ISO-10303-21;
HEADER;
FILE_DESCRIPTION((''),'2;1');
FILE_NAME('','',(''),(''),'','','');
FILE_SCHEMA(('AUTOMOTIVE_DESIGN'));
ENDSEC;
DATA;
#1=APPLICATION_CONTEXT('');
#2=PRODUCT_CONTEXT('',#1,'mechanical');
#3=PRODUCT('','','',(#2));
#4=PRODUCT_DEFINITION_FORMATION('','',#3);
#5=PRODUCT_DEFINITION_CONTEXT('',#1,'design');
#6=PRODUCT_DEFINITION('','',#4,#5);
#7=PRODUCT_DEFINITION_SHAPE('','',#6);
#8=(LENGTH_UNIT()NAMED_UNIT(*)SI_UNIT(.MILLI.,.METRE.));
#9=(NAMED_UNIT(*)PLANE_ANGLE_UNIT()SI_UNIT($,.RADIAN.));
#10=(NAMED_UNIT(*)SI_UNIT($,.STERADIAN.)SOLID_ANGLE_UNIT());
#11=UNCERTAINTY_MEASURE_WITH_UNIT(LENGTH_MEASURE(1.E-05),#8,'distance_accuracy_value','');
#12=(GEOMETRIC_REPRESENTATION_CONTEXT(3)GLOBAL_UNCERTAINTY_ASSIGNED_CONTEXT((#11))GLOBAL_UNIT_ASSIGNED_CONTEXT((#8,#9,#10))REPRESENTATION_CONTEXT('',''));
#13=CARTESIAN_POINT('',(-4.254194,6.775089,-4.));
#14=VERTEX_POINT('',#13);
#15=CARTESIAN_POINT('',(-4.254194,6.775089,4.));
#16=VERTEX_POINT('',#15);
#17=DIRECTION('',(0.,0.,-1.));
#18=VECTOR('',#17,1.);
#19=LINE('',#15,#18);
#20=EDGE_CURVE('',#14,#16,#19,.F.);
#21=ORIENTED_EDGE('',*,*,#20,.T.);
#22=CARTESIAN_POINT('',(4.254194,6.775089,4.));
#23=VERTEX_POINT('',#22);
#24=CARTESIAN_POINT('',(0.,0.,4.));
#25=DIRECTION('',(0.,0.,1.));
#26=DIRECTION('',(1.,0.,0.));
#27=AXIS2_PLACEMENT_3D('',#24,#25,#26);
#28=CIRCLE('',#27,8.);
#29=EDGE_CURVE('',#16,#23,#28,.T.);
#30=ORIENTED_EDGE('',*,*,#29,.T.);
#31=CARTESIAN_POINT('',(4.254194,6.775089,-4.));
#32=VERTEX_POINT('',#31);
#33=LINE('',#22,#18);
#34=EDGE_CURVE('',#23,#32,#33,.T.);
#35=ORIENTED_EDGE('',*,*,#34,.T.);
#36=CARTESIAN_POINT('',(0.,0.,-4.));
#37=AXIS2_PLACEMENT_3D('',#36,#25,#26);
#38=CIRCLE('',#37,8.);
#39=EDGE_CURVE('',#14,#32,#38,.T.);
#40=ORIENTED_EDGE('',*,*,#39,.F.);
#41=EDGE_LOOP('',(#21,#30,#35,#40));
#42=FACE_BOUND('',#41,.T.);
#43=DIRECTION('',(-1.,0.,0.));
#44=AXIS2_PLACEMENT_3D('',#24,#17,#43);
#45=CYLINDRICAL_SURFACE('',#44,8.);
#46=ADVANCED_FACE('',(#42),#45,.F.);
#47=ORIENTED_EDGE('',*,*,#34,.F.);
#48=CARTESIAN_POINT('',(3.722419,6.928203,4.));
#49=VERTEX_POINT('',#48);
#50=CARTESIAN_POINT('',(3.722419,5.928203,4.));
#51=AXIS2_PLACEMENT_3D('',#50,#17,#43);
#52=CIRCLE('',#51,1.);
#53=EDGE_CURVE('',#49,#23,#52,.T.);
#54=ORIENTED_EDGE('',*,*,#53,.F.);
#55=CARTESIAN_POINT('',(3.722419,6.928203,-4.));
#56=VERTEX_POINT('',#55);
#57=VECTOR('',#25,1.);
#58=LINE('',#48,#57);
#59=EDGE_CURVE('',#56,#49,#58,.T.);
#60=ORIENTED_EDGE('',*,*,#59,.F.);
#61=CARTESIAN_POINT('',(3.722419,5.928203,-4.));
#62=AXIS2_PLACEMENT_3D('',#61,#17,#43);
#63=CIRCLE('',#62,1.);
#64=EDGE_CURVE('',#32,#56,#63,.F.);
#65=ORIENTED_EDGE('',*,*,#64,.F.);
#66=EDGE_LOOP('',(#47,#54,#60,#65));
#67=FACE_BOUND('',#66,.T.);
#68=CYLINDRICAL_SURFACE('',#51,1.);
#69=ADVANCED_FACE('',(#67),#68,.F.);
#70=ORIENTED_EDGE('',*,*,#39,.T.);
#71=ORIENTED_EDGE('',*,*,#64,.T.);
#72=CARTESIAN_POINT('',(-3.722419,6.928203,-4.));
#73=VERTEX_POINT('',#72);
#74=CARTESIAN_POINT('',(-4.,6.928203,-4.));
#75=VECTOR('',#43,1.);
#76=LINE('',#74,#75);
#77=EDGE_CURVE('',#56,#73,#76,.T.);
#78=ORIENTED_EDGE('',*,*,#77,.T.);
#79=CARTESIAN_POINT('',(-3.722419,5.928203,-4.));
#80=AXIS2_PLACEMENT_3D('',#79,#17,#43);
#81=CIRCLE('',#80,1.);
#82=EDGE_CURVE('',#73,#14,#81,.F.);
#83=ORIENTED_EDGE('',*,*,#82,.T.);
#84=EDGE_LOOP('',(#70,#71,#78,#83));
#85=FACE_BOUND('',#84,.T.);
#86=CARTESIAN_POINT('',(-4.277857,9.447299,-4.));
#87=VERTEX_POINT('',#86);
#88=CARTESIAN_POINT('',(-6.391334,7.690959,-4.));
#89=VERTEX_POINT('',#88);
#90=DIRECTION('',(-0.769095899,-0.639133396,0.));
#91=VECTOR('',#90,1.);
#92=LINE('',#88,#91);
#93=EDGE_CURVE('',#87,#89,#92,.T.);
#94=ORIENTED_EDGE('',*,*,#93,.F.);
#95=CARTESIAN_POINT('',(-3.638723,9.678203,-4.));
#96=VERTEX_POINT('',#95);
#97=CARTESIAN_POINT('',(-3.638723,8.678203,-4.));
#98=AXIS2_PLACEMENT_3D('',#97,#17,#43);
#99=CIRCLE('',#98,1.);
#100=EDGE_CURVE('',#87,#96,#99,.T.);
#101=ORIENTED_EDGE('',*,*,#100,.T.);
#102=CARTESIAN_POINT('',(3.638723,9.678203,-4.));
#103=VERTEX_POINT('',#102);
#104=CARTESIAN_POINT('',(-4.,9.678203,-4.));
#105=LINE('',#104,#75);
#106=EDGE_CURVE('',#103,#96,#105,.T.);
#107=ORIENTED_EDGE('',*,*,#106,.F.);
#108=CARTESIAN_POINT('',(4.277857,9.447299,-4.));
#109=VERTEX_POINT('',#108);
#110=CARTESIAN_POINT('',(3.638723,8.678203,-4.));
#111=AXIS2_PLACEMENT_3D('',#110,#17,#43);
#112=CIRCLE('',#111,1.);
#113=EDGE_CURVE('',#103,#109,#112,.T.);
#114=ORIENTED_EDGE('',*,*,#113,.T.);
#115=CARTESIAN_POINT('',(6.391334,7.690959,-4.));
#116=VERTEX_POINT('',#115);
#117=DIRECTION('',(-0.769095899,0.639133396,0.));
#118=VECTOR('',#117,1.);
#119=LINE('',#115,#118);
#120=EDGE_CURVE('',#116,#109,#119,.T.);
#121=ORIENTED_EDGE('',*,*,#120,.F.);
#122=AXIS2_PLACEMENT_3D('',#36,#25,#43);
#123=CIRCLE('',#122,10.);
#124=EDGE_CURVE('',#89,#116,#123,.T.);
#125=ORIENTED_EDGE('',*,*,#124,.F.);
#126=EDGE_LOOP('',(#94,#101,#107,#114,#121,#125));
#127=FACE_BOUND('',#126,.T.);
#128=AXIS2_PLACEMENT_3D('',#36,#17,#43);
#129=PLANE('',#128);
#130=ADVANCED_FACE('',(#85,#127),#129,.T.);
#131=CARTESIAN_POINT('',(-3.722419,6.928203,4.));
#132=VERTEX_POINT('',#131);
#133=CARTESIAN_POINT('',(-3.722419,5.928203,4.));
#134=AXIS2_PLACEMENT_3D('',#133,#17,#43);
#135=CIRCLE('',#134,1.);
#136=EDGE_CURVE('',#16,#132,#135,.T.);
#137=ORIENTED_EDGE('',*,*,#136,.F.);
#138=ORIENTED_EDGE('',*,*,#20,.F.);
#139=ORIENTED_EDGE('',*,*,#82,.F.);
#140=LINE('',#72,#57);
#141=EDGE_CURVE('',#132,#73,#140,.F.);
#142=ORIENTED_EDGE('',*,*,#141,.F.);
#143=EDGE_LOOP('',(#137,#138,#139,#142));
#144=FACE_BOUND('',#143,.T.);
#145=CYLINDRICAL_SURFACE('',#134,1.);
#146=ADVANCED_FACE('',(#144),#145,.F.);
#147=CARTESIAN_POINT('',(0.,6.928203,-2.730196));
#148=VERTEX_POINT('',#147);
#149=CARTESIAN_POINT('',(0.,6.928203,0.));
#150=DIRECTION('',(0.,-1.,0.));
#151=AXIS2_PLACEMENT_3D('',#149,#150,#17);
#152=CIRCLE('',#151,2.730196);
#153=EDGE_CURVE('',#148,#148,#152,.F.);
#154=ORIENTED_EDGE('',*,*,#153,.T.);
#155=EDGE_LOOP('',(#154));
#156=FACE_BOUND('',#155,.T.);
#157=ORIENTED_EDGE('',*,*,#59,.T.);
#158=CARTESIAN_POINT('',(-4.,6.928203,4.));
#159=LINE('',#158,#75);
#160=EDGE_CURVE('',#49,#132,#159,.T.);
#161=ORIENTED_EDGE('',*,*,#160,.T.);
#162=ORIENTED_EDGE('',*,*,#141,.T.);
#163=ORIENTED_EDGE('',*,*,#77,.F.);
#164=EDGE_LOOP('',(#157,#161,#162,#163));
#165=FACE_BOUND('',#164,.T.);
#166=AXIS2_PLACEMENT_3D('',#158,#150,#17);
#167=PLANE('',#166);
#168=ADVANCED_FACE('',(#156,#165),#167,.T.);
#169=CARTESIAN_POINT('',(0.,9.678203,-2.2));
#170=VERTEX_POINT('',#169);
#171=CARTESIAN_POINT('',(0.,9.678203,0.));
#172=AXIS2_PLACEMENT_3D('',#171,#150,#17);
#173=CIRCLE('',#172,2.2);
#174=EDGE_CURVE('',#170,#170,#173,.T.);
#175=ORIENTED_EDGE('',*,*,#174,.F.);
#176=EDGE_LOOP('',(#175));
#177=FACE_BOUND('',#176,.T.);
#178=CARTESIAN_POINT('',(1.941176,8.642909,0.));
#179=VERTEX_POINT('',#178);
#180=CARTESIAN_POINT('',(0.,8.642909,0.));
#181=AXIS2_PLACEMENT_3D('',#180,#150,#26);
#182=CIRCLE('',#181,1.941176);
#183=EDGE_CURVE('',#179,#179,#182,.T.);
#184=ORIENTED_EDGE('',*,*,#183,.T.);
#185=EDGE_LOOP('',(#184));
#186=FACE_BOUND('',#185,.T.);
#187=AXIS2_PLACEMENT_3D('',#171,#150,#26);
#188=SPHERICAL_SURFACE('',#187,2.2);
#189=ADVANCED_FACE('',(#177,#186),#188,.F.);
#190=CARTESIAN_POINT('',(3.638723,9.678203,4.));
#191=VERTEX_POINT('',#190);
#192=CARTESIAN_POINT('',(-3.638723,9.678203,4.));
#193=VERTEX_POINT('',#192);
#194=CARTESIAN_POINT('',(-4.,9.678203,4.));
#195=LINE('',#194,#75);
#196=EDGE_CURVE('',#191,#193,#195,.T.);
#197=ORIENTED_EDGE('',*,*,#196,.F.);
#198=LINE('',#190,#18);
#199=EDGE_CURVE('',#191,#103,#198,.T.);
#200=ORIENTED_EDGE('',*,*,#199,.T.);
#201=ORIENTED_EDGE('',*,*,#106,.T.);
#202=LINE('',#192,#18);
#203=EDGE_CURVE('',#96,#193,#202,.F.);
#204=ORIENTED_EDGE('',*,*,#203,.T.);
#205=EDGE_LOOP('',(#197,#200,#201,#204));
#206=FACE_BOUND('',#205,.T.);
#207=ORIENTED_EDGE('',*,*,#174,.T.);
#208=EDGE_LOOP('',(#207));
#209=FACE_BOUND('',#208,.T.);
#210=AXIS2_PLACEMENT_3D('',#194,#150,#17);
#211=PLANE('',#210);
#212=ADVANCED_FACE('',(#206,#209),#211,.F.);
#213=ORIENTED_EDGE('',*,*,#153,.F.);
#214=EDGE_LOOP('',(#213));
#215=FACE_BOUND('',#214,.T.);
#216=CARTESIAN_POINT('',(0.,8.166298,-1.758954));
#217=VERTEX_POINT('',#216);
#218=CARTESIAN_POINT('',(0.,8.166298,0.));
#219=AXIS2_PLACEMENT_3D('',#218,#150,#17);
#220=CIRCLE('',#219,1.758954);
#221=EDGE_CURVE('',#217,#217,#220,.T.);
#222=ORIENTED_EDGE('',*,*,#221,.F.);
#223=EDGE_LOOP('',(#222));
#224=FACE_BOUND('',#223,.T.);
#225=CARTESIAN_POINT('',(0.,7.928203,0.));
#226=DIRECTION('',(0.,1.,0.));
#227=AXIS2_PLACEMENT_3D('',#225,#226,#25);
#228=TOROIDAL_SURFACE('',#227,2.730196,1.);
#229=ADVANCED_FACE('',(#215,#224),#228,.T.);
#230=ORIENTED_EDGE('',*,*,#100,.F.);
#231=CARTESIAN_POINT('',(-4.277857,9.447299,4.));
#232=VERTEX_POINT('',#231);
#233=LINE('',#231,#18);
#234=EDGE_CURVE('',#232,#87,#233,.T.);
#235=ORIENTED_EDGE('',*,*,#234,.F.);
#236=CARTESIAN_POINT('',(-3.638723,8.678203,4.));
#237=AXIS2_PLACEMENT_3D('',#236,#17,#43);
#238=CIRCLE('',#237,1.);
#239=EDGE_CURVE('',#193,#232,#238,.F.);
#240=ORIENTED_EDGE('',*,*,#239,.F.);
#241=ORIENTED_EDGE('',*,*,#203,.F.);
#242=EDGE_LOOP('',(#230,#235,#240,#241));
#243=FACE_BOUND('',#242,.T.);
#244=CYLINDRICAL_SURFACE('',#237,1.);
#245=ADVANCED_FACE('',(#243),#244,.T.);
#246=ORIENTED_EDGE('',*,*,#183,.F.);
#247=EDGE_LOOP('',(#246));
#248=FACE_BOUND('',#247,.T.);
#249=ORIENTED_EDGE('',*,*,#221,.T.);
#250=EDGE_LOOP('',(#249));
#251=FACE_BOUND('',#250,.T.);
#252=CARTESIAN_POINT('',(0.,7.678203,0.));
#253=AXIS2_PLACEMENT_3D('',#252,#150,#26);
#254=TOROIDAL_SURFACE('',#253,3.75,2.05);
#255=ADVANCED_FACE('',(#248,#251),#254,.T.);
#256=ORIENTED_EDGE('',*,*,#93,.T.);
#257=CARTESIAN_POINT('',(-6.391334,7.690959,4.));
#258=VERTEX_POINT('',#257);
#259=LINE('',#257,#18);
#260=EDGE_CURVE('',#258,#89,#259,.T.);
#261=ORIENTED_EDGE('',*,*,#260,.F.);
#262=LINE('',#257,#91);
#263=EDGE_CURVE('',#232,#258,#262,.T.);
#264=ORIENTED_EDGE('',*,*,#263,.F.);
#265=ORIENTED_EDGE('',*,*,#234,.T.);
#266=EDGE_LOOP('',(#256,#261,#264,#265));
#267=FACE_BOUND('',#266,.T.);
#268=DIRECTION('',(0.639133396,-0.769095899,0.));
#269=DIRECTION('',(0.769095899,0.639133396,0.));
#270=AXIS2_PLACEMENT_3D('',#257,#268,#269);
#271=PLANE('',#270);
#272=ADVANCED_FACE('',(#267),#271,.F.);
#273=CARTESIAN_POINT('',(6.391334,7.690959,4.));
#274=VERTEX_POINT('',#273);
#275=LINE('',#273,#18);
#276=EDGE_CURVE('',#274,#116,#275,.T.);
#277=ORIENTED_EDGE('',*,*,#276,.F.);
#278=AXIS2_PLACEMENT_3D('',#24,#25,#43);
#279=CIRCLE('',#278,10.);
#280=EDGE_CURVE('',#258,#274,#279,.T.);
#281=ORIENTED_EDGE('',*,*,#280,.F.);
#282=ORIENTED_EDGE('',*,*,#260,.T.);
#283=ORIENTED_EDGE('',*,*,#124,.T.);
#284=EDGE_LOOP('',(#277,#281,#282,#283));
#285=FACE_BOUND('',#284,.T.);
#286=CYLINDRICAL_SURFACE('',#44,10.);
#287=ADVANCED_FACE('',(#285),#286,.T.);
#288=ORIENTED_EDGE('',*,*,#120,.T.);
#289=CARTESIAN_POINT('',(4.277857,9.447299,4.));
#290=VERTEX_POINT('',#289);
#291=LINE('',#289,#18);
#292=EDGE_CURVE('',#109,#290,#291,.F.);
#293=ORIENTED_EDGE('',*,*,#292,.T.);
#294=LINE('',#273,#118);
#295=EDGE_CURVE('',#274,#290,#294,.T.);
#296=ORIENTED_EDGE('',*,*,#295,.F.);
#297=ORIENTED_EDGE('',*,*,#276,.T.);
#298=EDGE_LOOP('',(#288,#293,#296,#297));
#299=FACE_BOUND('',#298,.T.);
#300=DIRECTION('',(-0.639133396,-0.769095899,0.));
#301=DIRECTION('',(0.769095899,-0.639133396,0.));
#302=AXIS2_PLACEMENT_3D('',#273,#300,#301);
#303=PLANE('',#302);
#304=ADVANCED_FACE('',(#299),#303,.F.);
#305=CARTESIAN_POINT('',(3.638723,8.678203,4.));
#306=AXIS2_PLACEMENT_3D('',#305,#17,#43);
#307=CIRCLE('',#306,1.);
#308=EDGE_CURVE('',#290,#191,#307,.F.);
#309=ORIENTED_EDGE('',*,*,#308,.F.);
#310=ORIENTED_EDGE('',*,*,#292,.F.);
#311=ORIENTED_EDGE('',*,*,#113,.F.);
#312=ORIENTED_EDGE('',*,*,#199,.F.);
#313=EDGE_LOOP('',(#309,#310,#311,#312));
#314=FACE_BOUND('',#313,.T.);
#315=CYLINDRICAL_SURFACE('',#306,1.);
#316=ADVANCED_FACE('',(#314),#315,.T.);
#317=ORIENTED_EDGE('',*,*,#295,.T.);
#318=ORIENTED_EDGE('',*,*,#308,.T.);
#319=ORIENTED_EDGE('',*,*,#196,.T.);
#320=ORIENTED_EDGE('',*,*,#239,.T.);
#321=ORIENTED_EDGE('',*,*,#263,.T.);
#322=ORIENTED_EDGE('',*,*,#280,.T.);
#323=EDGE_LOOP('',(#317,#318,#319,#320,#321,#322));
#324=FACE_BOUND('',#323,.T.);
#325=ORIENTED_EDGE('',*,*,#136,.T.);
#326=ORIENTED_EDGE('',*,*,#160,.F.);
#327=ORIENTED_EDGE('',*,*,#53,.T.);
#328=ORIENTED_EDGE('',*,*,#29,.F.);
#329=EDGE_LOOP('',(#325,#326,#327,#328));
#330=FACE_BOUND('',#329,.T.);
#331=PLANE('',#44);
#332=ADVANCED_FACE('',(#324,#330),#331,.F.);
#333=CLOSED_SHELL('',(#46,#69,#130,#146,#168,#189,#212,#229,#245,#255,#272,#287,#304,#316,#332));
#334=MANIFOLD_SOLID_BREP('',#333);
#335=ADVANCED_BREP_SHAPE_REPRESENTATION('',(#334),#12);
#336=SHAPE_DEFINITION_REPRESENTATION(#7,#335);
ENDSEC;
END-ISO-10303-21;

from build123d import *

# Parameters (mm, degrees)
BOSS_EXTRUDE1_DEPTH = 4
FILLET2_R           = 1
FILLET3_R           = 1


with BuildPart() as part:
    # Sketch1 → Boss-Extrude1 (new, symmetric)
    with BuildSketch(Plane.XY):
        with BuildLine():
            Line((-4, 9.67820323), (4, 9.67820323))
            Line((4, 9.67820323), (6.391333959, 7.690958992))
            ThreePointArc((6.391333959, 7.690958992), (0, -10), (-6.391333959, 7.690958992))
            Line((-6.391333959, 7.690958992), (-4, 9.67820323))
        make_face()
        with BuildLine():
            Line((-4, 6.92820323), (4, 6.92820323))
            ThreePointArc((4, 6.92820323), (0, -8), (-4, 6.92820323))
        make_face(mode=Mode.SUBTRACT)
    extrude(amount=BOSS_EXTRUDE1_DEPTH, both=True)

    # Sketch2 → Cut-Revolve1 (revolve, cut)
    with BuildSketch(Plane.XY):
        with BuildLine():
            Line((0, 6.72820323), (0, 11.87820323))
            ThreePointArc((0, 11.87820323), (1.886484437, 10.810093892), (1.941176471, 8.642909113))
            ThreePointArc((1.941176471, 8.642909113), (1.761207875, 8.175401262), (1.7, 7.67820323))
            Line((1.7, 7.67820323), (1.7, 6.72820323))
            Line((1.7, 6.72820323), (0, 6.72820323))
        make_face()
    revolve(axis=Axis((0, 6.72820323, 0), (0, 1, 0)), mode=Mode.SUBTRACT)

    # Fillet2
    # the kernel refuses this fillet: 1 mm, written as the material it takes off along each edge
    with BuildSketch(Plane(origin=(0, 6.92820323, 0), x_dir=(1, 0, 0), z_dir=(0, 0, -1))) as fillet2_piece_1:
        with BuildLine():
            CenterArc((2.730196097, -1), FILLET2_R, 90, 103.774146998)
            Line((1.758954285, -1.238095238), (1.661830104, -1.261904762))
            ThreePointArc((1.661830104, -1.261904762), (1.6, -0.75), (1.6, 0))
            Line((1.6, 0), (1.7, 0.1))
            Line((1.7, 0.1), (2.730196097, 0.1))
            Line((2.730196097, 0.1), (2.730196097, 0))
        make_face()
    revolve(axis=Axis((0, 6.92820323, 0), (0, -1, 0)), mode=Mode.SUBTRACT)

    # Fillet3
    fillet3_edges = [part.edges().sort_by_distance(p)[0] for p in [
        (-4, 6.92820323, 0),
        (4, 6.92820323, 0),
        (-4, 9.67820323, 0),
        (4, 9.67820323, 0),
    ]]
    fillet(fillet3_edges, radius=FILLET3_R)


solid = part.part
